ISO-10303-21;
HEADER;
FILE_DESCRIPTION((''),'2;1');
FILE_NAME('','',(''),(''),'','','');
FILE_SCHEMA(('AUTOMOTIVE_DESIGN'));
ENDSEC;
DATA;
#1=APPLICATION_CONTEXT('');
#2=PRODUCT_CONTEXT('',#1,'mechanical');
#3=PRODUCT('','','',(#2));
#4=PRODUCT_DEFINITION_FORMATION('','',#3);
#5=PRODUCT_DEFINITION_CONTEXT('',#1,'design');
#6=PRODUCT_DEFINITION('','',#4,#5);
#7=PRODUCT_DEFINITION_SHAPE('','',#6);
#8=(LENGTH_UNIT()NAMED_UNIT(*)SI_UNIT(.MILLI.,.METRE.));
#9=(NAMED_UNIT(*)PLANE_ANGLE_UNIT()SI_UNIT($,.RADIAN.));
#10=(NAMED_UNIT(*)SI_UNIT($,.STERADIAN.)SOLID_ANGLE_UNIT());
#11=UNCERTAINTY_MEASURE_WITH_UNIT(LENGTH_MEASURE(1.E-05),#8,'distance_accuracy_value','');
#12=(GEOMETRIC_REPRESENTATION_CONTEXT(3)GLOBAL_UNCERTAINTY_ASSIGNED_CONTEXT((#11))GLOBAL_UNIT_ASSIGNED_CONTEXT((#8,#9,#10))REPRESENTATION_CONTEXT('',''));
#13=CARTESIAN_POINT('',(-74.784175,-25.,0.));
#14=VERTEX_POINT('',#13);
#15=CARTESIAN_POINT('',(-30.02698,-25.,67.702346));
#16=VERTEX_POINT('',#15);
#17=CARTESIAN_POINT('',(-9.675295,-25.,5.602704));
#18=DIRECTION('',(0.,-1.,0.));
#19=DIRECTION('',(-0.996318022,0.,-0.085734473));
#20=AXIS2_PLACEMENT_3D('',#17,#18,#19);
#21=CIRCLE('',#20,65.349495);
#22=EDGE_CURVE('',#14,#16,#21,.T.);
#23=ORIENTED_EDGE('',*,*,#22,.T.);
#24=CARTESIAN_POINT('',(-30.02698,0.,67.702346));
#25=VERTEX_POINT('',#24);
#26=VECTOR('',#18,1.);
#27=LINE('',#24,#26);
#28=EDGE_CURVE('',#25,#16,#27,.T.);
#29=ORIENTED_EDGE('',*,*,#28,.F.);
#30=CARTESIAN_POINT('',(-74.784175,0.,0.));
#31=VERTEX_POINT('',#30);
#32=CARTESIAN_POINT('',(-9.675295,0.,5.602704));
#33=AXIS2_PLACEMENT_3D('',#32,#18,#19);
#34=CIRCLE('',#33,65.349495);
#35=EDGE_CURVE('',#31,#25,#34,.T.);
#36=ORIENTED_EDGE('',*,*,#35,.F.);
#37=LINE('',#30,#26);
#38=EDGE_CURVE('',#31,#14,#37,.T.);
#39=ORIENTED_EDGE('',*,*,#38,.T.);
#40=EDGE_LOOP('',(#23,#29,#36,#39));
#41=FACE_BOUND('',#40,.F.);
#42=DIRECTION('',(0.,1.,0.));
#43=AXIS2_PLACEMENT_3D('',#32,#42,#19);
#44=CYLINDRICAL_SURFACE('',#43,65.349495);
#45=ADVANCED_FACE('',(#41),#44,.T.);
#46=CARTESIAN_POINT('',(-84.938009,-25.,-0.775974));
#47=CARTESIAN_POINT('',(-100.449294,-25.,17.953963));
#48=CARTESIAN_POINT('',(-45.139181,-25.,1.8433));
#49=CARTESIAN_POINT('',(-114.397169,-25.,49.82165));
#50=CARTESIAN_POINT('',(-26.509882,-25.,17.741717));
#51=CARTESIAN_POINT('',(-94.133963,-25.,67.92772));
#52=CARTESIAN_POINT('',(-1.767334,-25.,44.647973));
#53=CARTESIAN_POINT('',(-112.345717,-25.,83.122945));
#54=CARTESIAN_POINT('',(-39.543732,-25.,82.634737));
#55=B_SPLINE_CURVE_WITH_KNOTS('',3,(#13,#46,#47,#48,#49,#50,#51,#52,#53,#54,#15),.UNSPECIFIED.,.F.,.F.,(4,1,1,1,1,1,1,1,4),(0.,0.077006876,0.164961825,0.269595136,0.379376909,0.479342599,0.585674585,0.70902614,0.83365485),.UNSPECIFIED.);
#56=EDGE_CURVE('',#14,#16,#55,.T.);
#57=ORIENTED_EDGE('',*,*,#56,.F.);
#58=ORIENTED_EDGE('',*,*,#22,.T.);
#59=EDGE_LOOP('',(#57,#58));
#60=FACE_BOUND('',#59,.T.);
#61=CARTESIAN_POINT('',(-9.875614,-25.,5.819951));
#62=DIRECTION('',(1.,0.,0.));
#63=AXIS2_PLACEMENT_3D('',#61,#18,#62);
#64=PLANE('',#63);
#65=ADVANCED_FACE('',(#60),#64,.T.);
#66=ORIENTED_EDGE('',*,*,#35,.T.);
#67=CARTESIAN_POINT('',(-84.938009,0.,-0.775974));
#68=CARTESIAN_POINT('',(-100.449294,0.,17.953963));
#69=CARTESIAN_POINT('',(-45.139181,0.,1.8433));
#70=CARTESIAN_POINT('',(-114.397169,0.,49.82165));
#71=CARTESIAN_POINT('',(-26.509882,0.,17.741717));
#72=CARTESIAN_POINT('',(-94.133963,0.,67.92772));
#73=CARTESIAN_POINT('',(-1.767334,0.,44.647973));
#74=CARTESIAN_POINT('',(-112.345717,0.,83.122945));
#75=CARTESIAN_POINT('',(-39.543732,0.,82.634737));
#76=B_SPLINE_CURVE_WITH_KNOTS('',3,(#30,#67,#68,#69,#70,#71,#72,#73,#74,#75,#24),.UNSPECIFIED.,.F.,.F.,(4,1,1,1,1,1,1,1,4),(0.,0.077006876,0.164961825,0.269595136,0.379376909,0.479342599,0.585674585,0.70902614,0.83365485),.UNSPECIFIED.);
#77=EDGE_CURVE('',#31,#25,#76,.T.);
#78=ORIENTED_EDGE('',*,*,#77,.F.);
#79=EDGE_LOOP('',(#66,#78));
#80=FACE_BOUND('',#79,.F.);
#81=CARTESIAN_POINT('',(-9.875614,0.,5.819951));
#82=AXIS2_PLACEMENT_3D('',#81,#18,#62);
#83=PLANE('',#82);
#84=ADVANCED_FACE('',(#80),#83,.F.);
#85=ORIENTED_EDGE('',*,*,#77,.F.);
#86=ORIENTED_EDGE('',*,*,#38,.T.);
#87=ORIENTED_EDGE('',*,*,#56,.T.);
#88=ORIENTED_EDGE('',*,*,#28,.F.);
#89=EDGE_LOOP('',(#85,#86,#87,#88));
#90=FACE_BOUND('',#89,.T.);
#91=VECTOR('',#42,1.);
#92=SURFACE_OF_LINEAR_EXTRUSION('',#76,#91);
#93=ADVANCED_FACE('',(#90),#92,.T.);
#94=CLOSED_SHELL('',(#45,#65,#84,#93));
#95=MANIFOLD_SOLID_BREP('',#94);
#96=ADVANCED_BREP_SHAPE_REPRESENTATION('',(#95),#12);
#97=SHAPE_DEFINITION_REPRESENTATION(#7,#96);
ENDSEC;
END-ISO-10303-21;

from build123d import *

# Parameters (mm, degrees)
F1_DEPTH = 25


with BuildPart() as f1:
    # F0 (on Front) → F1 (new body)
    with BuildSketch(Plane.XZ):
        with BuildLine():
            add(Edge.make_bspline(
                [(-30.0269797444, 67.7023455501), (-17.3247250732, 47.7716972688), (-52.8505344727, 1.6762077404), (-74.7841745615, 0)],
                knots=[0.8336548496, 0.8336548496, 0.8336548496, 0.8336548496, 1, 1, 1, 1], degree=3))
            ThreePointArc((-74.7841745615, 0), (44.8387298443, -30.435852405), (-30.0269797444, 67.7023455501))
        make_face()
        with BuildLine():
            add(Edge.make_bspline(
                [(-74.7841745615, 0), (-84.938008863, -0.7759740555), (-100.449294077, 17.9539630279), (-45.1391808821, 1.8432996539), (-114.3971690671, 49.8216503582), (-26.5098819208, 17.7417174135), (-94.1339625418, 67.9277197493), (-1.7673344801, 44.6479731779), (-112.3457165496, 83.1229447559), (-39.5437321689, 82.6347374964), (-30.0269797444, 67.7023455501)],
                knots=[0, 0, 0, 0, 0.0770068756, 0.1649618246, 0.2695951364, 0.3793769086, 0.4793425991, 0.5856745846, 0.7090261396, 0.8336548496, 0.8336548496, 0.8336548496, 0.8336548496], degree=3))
            add(Edge.make_bspline(
                [(-30.0269797444, 67.7023455501), (-17.3247250732, 47.7716972688), (-52.8505344727, 1.6762077404), (-74.7841745615, 0)],
                knots=[0.8336548496, 0.8336548496, 0.8336548496, 0.8336548496, 1, 1, 1, 1], degree=3))
        make_face()
    extrude(amount=F1_DEPTH)


solid = f1.part
